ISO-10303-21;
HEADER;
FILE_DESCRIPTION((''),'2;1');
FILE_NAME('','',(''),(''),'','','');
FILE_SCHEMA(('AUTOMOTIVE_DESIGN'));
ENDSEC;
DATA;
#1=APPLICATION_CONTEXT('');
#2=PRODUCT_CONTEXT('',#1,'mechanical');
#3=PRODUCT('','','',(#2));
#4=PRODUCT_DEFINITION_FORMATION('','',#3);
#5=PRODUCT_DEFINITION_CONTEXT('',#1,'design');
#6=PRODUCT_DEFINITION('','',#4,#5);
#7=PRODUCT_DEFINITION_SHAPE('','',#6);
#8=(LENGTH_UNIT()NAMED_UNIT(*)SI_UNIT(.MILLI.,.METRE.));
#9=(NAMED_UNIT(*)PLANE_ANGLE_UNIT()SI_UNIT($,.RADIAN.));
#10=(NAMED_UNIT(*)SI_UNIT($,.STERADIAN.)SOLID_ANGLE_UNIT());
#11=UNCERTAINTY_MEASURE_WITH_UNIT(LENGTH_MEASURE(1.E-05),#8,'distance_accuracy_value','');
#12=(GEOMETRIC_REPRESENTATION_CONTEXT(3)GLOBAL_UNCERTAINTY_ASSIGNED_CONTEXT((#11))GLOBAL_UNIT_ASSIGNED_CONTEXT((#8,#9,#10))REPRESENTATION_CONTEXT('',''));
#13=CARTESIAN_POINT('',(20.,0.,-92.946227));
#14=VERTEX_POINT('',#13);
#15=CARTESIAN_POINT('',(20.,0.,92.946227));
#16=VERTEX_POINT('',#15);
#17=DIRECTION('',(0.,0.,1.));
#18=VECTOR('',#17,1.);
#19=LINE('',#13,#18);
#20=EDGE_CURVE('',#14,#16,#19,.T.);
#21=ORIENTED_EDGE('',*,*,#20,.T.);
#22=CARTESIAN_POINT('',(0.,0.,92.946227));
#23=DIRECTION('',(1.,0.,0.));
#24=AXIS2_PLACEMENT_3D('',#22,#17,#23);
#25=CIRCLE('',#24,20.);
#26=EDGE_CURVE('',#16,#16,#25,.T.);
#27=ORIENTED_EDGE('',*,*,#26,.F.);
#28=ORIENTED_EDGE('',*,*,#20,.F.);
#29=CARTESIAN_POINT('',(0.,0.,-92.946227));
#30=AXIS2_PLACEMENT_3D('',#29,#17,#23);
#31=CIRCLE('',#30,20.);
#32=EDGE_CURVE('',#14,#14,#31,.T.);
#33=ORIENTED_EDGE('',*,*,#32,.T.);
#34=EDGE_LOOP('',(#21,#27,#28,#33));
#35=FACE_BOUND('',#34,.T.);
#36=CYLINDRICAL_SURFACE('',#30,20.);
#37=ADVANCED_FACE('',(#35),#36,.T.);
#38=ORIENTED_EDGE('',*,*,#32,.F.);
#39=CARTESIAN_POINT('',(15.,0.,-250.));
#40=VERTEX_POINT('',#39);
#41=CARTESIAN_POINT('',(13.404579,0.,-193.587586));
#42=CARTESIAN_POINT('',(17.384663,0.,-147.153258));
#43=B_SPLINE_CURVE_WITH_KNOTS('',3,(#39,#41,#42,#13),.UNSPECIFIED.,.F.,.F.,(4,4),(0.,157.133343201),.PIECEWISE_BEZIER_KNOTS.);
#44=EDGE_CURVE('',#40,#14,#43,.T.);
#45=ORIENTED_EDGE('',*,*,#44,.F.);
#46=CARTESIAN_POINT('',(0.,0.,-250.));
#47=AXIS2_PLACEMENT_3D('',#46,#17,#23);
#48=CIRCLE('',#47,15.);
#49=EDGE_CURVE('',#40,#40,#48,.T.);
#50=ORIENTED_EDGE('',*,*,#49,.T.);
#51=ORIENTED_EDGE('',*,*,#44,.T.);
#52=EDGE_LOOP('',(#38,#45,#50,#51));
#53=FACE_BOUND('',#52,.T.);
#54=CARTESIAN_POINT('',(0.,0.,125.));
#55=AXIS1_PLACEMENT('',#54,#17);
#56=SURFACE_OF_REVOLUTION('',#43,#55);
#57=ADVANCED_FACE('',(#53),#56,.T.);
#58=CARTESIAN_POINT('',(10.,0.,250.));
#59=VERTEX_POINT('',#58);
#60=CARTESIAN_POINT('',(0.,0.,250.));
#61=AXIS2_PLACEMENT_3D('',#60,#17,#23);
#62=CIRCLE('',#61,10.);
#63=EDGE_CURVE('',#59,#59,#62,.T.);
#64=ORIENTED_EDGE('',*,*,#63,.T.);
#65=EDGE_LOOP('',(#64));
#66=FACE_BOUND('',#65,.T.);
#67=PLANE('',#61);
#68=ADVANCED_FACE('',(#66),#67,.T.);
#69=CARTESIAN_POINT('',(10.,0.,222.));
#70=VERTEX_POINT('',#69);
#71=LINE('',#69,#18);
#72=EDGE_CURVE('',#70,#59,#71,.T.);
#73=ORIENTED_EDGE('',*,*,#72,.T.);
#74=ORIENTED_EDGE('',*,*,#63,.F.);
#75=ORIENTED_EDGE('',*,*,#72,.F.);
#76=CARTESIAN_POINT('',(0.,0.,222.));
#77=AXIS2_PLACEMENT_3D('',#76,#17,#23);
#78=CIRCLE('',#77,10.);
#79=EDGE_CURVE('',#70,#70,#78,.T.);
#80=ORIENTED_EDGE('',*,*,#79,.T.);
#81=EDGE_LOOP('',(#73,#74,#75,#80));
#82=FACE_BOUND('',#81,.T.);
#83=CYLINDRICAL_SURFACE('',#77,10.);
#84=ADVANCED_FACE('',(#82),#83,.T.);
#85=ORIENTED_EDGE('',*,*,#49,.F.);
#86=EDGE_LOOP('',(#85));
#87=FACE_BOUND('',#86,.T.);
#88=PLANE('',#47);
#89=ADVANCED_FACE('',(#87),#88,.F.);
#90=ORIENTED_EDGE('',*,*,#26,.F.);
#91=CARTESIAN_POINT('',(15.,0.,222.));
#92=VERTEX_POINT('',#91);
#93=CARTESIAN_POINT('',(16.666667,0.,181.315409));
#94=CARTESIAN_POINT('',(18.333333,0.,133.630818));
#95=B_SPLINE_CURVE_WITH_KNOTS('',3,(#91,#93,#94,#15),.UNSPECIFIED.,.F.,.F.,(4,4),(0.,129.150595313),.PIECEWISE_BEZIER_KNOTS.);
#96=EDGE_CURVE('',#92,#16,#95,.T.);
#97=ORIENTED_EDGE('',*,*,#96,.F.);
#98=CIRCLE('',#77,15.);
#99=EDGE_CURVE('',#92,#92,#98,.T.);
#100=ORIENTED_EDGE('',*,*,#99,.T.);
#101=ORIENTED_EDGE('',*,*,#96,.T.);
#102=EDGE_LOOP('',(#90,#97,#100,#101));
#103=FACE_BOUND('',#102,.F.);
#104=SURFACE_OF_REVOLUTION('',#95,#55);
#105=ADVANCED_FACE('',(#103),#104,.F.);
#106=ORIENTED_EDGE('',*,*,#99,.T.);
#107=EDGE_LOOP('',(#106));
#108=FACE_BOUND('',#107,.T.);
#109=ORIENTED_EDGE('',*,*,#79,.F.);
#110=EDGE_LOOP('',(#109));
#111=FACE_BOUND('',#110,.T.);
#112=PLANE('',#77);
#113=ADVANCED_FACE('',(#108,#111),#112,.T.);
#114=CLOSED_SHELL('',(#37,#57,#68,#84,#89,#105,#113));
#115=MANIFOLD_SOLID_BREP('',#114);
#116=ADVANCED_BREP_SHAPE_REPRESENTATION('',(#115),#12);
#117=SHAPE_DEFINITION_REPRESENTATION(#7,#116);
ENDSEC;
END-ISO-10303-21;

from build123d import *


# Not quite as in the source:
# - a feature names something its author has since deleted; it is built from what else it names


with BuildPart() as f1:
    # F0 (on Front) → F1 (revolve)
    with BuildSketch(Plane.XZ):
        with BuildLine():
            Line((0, 250), (0, 0))
            Line((0, 0), (0, -250))
            Line((0, -250), (15, -250))
            add(Edge.make_bspline(
                [(15, -250), (13.4045789018, -193.5875862837), (17.3846632242, -147.1532583237), (20, -92.9462272166)],
                knots=[0, 0, 0, 0, 157.1333432009, 157.1333432009, 157.1333432009, 157.1333432009], degree=3))
            Line((20, -92.9462272166), (20, 0))
            Line((20, 0), (20, 92.9462272166))
            add(Edge.make_bspline(
                [(15, 222), (16.6666666667, 181.3154090722), (18.3333333333, 133.6308181444), (20, 92.9462272166)],
                knots=[0, 0, 0, 0, 129.1505953127, 129.1505953127, 129.1505953127, 129.1505953127], degree=3))
            Line((15, 222), (10, 222))
            Line((10, 222), (10, 250))
            Line((10, 250), (0, 250))
        make_face()
    revolve(axis=Axis((0, 0, 125), (0, 0, 1)))


solid = f1.part
